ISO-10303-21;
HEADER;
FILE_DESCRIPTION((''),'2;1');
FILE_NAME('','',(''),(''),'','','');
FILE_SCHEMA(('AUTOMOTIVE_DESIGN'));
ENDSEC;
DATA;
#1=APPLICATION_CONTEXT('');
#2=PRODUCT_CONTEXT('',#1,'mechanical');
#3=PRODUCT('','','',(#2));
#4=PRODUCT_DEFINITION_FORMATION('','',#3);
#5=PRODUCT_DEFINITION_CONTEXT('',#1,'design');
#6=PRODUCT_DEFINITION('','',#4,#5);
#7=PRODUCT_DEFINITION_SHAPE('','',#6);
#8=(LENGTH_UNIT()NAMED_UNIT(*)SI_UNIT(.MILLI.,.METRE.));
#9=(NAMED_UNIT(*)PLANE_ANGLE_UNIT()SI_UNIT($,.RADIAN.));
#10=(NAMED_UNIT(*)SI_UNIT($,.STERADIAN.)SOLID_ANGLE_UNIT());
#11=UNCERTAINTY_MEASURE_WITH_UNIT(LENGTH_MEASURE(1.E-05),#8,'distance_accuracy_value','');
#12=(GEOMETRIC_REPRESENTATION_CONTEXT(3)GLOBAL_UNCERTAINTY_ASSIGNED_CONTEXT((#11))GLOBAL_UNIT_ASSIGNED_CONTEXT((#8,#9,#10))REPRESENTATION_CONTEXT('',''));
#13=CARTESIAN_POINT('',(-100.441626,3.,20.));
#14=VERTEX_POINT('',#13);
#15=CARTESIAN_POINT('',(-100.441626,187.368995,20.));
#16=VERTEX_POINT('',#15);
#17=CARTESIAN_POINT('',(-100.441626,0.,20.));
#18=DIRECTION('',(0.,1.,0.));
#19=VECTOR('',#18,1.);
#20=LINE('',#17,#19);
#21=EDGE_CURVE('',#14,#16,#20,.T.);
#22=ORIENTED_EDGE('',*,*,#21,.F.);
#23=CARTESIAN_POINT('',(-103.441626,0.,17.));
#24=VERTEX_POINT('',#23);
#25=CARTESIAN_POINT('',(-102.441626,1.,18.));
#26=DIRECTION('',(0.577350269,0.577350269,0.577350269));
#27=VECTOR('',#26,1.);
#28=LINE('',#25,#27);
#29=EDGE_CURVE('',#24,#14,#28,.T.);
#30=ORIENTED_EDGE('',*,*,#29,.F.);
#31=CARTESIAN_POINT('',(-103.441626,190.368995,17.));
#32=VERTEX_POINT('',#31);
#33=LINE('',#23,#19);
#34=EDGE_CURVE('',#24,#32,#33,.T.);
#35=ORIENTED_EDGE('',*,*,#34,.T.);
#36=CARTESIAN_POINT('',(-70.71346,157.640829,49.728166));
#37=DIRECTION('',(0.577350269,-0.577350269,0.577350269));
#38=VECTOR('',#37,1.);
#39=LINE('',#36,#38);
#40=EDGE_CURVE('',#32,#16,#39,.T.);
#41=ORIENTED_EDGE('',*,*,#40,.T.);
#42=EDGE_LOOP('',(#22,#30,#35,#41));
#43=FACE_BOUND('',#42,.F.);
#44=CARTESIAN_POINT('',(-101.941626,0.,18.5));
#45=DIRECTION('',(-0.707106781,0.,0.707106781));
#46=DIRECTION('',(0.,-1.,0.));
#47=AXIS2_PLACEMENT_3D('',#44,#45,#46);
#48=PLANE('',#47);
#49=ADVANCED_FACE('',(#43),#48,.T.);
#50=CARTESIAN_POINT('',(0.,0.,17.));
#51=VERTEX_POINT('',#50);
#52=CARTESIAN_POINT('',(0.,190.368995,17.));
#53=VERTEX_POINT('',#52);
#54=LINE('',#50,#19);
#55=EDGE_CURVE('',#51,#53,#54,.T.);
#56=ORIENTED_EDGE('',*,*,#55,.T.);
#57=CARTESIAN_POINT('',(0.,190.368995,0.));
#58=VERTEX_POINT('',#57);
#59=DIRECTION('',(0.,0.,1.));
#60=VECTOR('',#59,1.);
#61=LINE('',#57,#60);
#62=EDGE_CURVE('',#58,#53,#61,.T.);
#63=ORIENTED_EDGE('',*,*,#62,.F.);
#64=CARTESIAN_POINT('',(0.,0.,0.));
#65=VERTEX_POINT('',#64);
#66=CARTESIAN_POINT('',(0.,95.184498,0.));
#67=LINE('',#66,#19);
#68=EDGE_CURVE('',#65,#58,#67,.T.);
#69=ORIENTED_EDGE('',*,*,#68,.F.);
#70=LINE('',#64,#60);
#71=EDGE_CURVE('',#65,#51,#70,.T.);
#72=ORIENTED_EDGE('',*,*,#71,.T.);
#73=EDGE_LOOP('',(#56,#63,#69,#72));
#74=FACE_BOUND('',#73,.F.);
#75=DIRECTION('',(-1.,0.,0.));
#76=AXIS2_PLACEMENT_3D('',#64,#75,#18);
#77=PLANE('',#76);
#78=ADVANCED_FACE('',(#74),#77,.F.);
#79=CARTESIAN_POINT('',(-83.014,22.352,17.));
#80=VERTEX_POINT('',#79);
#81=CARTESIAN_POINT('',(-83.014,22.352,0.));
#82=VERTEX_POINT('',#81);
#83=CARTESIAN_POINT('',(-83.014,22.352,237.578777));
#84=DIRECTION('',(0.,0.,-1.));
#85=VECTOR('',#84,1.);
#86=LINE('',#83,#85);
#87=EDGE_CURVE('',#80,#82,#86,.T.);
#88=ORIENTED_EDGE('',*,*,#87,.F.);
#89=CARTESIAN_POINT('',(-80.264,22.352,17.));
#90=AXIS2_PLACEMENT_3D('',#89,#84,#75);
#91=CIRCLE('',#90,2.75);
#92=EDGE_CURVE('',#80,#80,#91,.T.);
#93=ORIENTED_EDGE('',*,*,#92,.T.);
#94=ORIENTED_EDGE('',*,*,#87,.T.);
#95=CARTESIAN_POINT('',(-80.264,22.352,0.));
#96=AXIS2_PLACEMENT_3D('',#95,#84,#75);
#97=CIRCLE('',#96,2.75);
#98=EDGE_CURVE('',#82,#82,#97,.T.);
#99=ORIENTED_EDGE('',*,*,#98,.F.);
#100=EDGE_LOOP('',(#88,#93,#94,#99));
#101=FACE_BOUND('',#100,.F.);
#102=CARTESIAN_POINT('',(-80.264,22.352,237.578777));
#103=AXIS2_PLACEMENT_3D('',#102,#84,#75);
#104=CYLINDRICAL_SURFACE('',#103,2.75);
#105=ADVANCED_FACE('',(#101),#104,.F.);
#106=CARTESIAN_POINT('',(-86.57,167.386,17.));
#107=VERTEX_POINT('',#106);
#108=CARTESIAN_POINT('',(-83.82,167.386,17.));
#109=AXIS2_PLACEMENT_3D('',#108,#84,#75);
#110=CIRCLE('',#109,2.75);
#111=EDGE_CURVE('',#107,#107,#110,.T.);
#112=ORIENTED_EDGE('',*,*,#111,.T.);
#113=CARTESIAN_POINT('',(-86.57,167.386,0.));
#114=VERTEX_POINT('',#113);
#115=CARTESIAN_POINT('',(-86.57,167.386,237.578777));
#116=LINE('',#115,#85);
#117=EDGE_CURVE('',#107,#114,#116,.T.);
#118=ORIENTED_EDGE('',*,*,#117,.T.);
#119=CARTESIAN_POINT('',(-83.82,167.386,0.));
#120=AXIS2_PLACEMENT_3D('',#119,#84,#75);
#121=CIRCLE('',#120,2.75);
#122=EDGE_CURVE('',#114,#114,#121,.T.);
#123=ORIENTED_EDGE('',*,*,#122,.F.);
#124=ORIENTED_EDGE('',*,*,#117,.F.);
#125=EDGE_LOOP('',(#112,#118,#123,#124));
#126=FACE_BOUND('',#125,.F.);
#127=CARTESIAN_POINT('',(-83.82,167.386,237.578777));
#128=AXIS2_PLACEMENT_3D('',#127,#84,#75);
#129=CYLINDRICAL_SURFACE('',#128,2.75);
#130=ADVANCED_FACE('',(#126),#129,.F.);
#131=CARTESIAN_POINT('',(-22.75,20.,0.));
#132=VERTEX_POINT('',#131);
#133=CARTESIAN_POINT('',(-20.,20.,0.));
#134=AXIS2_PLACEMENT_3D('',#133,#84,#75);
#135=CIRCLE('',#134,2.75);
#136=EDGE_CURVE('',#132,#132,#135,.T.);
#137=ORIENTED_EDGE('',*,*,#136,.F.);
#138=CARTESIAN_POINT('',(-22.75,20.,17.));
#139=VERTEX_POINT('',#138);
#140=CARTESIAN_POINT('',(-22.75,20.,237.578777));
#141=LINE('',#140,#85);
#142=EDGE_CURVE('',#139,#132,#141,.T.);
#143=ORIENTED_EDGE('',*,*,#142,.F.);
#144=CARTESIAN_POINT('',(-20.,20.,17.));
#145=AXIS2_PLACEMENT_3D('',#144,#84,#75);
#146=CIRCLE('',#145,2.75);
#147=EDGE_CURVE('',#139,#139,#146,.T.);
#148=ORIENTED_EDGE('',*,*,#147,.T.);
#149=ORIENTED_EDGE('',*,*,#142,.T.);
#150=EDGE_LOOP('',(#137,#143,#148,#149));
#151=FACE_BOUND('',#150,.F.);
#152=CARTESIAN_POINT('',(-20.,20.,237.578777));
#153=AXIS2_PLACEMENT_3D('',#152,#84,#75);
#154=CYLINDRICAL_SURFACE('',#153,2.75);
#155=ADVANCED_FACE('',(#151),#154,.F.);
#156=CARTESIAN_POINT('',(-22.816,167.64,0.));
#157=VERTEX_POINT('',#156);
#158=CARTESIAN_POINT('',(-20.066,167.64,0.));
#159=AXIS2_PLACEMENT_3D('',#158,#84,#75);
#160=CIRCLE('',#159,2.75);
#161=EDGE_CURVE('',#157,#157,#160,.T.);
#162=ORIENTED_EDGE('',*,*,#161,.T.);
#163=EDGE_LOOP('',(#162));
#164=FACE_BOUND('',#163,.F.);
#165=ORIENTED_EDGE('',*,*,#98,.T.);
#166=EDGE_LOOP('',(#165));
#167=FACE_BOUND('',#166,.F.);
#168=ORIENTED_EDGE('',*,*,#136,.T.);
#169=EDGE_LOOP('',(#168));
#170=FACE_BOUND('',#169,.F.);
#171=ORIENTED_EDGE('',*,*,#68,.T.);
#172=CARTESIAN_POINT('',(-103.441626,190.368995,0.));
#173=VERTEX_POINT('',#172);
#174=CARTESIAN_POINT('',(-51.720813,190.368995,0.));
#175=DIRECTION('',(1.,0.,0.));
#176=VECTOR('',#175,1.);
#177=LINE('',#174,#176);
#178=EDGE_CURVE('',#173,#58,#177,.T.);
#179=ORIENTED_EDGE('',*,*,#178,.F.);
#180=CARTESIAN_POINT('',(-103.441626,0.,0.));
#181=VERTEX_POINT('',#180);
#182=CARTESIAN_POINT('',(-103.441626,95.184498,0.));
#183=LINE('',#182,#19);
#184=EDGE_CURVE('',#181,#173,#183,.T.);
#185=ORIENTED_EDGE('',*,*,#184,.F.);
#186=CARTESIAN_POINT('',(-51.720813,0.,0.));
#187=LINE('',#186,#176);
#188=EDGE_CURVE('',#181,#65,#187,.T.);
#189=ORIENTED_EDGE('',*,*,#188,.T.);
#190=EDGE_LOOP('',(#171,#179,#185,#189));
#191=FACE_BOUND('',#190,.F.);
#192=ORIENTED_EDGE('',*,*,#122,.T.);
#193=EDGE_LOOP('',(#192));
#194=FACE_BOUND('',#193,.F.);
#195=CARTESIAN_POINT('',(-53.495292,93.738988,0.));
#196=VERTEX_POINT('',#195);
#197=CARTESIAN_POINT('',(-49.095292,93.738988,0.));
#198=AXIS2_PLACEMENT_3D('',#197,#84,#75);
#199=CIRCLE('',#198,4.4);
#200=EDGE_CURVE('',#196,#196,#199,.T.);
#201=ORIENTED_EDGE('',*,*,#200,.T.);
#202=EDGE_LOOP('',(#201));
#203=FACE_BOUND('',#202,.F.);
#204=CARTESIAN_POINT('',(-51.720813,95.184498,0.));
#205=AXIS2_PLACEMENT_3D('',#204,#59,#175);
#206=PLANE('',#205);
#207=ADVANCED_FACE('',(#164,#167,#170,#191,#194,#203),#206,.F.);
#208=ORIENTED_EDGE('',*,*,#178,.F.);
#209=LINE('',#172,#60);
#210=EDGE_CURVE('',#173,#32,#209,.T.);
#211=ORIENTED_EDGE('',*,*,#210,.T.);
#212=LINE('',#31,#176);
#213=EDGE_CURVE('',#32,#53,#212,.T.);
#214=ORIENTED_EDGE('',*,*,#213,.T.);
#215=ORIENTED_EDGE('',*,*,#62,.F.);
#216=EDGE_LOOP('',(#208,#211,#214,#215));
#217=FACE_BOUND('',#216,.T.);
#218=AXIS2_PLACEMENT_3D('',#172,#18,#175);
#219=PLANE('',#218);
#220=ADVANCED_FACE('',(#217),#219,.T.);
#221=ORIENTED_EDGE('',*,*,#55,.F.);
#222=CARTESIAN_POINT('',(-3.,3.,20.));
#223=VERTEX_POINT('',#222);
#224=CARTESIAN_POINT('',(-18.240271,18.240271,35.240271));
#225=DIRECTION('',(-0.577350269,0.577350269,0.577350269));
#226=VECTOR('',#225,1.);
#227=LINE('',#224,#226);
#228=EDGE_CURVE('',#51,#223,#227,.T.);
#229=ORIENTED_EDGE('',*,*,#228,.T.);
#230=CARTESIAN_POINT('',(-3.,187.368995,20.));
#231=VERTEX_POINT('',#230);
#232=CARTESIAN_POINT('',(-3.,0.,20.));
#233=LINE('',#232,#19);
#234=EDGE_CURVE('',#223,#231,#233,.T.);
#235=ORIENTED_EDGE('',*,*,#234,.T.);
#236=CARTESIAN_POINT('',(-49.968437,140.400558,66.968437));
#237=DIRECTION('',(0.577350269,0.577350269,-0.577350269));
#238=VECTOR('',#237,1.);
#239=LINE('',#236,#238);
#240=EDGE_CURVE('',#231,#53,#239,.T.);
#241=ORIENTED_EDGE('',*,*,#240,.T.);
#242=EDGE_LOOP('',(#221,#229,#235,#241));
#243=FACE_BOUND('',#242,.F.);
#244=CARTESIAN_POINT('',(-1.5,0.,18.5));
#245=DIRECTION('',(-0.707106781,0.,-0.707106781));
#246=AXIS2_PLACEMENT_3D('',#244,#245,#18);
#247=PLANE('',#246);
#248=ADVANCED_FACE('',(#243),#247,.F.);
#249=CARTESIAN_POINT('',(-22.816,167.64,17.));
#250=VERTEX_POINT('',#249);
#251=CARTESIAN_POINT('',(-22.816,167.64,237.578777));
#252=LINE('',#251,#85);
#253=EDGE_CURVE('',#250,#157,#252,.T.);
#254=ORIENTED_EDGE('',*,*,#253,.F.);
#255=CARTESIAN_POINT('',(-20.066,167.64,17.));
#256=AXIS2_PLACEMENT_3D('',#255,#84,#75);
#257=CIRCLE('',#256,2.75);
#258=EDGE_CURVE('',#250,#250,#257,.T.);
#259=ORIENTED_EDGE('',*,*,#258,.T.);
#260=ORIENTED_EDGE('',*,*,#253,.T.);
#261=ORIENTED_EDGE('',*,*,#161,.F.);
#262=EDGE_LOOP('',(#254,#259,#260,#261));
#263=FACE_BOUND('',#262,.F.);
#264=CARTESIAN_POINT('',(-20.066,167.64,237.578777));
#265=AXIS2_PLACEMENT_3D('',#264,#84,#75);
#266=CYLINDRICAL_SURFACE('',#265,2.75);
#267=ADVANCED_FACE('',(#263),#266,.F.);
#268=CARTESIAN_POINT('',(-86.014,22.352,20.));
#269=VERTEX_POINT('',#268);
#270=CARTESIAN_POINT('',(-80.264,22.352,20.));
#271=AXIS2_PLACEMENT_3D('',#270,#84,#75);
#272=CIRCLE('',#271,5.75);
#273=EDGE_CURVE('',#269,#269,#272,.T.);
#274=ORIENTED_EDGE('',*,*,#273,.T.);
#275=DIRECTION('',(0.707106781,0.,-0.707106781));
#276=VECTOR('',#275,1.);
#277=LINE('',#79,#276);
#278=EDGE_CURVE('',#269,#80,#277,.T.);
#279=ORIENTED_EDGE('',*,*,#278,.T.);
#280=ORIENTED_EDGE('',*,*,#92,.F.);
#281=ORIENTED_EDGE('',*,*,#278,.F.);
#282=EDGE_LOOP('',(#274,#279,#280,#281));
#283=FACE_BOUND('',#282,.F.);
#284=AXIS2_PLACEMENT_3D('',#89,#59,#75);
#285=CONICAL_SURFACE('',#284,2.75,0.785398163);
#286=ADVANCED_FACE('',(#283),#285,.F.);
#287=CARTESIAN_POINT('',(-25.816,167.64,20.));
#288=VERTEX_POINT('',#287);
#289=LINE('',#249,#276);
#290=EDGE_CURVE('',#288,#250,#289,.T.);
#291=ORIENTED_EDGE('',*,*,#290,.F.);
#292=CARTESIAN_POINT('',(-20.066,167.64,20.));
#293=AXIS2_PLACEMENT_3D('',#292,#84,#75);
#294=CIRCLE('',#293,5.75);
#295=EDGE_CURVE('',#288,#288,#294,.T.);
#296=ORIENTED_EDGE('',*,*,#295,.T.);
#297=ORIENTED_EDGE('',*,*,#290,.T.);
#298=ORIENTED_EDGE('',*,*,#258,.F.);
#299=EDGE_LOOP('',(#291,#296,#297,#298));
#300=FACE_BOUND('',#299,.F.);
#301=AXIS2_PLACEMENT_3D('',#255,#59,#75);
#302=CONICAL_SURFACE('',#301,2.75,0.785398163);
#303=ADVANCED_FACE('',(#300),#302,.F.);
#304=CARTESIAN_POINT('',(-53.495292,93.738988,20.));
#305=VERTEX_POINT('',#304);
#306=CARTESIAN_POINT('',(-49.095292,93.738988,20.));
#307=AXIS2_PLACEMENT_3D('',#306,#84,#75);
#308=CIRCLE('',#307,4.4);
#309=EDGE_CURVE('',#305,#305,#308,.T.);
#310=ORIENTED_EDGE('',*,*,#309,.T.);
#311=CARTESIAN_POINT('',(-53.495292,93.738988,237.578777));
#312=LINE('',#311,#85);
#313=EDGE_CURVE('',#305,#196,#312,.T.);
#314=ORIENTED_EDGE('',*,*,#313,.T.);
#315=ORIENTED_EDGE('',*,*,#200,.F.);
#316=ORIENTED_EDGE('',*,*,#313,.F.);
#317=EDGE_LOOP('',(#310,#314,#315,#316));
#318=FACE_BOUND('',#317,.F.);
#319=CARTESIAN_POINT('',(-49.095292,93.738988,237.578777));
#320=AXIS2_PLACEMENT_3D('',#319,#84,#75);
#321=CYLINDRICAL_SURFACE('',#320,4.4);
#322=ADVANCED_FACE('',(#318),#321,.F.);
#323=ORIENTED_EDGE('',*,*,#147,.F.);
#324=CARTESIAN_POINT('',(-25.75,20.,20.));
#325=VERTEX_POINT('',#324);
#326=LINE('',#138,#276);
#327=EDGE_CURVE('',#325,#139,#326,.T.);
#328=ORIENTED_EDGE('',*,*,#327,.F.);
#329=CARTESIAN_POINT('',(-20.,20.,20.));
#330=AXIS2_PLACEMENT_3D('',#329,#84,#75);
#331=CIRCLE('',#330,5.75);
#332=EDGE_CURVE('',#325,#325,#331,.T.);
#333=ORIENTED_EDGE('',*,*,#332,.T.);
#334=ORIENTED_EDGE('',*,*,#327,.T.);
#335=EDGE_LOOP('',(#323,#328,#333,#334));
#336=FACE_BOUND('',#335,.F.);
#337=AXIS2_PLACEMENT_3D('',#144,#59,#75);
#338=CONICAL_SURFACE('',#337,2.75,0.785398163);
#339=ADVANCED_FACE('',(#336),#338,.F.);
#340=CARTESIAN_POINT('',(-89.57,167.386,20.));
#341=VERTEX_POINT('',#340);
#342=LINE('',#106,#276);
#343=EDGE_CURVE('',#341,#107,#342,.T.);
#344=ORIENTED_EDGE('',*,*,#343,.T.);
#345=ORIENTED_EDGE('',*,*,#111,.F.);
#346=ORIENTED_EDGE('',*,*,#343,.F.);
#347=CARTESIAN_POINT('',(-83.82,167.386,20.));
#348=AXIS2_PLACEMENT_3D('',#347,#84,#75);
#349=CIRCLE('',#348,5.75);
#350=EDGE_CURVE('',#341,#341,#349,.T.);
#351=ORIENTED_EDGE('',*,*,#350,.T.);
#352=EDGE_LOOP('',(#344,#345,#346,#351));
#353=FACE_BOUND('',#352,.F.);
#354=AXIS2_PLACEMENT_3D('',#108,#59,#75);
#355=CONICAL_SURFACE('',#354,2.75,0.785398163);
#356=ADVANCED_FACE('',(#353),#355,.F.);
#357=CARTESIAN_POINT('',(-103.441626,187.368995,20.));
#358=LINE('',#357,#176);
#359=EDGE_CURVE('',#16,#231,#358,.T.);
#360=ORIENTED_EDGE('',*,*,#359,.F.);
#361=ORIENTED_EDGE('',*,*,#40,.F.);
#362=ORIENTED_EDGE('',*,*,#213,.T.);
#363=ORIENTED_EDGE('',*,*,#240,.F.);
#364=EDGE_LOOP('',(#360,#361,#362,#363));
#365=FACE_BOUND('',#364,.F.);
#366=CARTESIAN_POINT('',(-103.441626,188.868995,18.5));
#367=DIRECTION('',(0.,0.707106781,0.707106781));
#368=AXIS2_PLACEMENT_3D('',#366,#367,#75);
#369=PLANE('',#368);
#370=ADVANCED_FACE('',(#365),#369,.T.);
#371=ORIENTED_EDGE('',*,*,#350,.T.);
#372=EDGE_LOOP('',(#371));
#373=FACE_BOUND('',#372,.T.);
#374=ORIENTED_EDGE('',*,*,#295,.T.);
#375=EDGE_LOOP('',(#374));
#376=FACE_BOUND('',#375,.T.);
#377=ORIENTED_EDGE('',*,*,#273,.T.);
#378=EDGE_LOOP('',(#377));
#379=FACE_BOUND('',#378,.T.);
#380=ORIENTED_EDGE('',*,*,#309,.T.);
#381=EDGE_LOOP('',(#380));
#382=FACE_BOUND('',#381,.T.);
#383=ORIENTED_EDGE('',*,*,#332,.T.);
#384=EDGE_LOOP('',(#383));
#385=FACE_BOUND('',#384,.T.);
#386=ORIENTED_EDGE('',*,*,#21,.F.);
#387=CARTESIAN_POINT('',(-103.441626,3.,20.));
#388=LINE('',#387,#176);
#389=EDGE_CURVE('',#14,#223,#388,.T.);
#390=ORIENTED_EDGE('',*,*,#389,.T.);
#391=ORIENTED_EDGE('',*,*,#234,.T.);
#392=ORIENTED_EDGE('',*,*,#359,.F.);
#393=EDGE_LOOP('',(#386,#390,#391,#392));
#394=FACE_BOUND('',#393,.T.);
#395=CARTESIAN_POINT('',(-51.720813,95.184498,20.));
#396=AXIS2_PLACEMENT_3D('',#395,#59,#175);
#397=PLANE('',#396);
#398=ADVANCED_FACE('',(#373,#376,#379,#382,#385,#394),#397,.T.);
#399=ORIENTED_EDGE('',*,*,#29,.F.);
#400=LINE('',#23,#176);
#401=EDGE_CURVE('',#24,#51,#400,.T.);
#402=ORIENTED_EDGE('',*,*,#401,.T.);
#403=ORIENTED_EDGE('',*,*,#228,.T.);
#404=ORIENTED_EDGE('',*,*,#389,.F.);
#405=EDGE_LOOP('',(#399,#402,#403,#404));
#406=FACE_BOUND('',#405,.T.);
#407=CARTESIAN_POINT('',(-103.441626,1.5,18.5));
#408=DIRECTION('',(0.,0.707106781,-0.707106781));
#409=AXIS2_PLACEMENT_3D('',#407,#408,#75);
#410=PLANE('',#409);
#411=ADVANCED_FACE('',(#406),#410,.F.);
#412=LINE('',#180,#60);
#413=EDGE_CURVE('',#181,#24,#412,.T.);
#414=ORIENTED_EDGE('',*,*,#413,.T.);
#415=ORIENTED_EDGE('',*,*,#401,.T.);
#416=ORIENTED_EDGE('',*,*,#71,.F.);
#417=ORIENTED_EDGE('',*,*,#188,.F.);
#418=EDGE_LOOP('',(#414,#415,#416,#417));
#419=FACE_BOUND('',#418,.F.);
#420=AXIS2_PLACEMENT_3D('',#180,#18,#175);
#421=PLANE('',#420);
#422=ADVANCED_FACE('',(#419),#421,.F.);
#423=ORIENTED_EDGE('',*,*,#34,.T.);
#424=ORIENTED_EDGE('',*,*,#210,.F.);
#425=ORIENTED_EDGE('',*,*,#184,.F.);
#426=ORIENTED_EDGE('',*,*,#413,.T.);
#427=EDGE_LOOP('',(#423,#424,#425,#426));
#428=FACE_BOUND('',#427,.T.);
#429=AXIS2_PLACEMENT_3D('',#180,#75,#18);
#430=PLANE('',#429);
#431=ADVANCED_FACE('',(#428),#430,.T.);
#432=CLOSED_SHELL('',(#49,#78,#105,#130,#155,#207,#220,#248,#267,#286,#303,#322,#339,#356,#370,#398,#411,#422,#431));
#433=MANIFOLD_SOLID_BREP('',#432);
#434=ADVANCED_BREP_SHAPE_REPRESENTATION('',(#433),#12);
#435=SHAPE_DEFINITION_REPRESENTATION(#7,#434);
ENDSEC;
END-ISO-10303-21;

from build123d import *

# Parameters (mm, degrees)
F0_W     = 103.4416258335
F0_H     = 190.3689950705
F1_DEPTH = 20
F3_D     = 5.5
F4_SIZE  = 3
F6_D     = 8.8


# Not quite as in the source:
# - a feature names something its author has since deleted; it is built from what else it names


with BuildPart() as f1:
    # F0 (on Top) → F1 (new body)
    with BuildSketch(Plane.XY):
        with Locations((-51.7208129168, 95.1844975352)):
            Rectangle(F0_W, F0_H)
    extrude(amount=F1_DEPTH)

    # F3 (through all)
    with Locations(Plane.XY.offset(20)):
        with Locations((-20, 20), (-83.82, 167.386), (-20.066, 167.64), (-80.264, 22.352)):
            Hole(F3_D / 2)

    # F4
    f4_edges = [f1.edges().sort_by_distance(p)[0] for p in [
        (-51.720813, 0, 20),
        (-103.441626, 95.184498, 20),
        (0, 95.184498, 20),
        (-51.720813, 190.368995, 20),
        (-83.014, 22.352, 20),
        (-22.75, 20, 20),
        (-86.57, 167.386, 20),
        (-22.816, 167.64, 20),
    ]]
    chamfer(f4_edges, length=F4_SIZE)

    # F6 (through all)
    with Locations(Plane.XY.offset(20)):
        with Locations((-49.0952916443, 93.7389880419)):
            Hole(F6_D / 2)


solid = f1.part
